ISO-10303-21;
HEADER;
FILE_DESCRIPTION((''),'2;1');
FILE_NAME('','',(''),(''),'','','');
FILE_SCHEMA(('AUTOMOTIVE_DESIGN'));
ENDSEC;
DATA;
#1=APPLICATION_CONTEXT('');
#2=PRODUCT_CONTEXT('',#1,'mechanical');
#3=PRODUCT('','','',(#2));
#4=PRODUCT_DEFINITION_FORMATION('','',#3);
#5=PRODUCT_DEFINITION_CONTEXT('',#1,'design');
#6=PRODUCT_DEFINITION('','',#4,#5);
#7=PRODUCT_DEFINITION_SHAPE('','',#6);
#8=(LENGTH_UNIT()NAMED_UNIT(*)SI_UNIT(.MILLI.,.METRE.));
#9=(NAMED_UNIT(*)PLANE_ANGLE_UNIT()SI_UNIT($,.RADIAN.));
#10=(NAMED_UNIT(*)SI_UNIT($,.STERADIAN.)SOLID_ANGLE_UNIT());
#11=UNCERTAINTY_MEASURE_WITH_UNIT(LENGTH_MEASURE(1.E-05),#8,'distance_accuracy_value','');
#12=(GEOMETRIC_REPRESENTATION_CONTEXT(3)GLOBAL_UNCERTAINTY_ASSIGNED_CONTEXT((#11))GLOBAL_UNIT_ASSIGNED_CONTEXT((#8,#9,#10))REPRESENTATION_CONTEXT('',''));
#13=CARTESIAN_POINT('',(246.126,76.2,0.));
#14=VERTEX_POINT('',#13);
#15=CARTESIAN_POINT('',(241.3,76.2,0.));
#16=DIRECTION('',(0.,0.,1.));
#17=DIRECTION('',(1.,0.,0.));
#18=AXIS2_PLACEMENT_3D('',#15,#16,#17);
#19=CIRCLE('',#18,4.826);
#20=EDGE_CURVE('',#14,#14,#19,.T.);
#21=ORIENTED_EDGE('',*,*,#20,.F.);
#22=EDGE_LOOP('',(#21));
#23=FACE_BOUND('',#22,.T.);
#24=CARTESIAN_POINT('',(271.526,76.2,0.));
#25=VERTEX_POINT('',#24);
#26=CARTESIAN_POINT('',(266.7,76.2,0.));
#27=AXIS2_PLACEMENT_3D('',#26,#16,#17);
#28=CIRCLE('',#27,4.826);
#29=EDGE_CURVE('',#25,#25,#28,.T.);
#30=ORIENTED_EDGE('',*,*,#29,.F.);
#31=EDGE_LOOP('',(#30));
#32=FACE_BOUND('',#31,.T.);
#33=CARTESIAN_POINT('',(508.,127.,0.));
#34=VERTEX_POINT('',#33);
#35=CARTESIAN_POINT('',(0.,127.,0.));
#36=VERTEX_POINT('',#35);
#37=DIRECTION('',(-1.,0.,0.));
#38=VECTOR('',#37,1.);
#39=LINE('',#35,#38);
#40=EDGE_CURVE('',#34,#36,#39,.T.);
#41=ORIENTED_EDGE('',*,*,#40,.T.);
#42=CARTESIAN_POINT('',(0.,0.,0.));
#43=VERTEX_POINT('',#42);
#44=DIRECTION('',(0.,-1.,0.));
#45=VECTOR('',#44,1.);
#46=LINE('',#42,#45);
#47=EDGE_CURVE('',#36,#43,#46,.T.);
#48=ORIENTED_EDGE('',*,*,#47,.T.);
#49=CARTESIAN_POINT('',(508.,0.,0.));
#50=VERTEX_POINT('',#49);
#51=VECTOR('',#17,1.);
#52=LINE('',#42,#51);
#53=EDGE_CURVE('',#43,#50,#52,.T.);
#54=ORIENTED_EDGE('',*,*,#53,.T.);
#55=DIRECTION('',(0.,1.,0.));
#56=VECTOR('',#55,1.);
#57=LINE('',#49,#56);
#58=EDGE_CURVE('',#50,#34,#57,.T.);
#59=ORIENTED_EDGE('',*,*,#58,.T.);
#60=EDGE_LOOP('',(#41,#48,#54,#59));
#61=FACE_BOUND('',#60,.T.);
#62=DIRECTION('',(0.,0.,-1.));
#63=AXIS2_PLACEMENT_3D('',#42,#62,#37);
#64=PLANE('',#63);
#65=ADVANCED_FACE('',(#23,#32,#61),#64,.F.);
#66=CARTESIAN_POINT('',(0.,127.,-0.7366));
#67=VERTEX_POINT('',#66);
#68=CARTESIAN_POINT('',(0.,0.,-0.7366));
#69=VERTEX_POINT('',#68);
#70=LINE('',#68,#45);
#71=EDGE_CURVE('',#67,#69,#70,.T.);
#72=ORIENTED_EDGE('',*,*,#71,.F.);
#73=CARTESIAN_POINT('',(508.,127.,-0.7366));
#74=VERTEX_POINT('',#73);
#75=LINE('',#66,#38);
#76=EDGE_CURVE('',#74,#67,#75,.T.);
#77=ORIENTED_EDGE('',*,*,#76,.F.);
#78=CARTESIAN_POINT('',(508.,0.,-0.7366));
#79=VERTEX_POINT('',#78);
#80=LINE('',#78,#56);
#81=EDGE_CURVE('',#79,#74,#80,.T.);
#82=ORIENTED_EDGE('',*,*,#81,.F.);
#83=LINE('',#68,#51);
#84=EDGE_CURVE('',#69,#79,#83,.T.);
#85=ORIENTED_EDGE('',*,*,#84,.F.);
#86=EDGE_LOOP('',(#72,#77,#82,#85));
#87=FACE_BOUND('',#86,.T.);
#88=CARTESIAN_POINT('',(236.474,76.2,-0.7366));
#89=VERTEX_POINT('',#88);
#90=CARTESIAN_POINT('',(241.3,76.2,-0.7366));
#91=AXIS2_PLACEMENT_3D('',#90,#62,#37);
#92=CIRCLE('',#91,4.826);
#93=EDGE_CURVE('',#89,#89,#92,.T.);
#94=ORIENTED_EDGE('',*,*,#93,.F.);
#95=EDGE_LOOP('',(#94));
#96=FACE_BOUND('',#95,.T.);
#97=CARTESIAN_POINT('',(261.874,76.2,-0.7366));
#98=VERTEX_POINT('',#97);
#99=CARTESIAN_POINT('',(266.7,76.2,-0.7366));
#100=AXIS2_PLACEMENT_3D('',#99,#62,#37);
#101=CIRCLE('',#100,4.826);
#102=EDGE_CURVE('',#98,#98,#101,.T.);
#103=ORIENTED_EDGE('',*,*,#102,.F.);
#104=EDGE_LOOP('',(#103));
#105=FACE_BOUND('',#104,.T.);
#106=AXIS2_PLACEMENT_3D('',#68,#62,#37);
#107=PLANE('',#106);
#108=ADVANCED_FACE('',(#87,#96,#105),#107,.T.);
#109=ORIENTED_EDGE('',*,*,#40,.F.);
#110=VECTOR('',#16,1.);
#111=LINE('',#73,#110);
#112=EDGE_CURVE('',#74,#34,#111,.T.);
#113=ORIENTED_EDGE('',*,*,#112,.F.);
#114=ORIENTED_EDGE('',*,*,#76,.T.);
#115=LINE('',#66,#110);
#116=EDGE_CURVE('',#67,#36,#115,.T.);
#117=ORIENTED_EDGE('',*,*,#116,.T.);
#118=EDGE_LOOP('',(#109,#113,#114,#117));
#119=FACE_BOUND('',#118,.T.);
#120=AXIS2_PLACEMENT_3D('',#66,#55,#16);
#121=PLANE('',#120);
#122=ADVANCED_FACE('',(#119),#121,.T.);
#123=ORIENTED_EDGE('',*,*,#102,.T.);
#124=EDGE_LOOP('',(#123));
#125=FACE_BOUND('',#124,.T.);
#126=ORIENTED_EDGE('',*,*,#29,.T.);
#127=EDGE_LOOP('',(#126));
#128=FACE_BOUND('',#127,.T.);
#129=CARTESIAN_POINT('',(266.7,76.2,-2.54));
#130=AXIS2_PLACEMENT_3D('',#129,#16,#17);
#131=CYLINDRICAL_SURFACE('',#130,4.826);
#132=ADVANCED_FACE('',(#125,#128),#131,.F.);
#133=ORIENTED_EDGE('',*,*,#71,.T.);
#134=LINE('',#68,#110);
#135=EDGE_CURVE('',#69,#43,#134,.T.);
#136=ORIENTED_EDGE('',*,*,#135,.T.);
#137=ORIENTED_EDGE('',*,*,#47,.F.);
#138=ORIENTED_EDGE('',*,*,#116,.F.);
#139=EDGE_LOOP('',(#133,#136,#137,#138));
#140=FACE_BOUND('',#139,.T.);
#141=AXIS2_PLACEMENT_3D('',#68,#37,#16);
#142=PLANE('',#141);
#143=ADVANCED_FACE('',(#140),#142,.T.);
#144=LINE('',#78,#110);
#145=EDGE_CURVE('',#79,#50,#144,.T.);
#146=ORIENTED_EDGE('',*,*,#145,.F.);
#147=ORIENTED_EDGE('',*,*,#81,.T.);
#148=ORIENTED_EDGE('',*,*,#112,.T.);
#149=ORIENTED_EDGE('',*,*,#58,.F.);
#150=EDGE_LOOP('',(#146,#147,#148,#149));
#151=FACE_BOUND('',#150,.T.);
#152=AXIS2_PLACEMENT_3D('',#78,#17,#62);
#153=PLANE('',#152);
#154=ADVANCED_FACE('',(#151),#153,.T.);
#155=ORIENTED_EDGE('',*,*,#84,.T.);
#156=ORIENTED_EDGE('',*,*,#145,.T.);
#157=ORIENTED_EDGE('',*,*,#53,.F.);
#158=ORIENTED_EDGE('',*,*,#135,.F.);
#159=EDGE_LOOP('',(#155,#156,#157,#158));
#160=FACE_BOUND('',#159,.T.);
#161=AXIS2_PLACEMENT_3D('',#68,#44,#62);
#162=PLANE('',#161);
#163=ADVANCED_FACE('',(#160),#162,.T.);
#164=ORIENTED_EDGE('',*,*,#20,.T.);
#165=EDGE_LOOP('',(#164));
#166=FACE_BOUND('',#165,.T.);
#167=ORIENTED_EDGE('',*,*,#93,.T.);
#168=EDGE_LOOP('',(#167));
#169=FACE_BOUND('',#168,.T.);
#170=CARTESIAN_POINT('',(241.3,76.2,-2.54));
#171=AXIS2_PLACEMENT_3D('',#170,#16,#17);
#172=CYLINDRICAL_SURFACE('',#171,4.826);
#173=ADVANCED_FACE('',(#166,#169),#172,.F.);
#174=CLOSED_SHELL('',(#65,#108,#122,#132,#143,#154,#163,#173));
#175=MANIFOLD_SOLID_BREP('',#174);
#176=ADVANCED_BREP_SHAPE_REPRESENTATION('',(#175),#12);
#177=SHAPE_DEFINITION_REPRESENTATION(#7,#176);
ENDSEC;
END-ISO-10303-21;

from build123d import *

# Parameters (mm, degrees)
SKETCH1_W          = 508
SKETCH1_H          = 127
BASE_FLANGE1_DEPTH = 0.7366
SKETCH2_R          = 4.826
CUT_EXTRUDE1_DEPTH = 2.54


# Sheet-metal steps are written as plain solids
with BuildPart() as part:
    # Sketch1 → Base-Flange1 (new body)
    with BuildSketch(Plane.XY):
        with Locations((254, 63.5)):
            Rectangle(SKETCH1_W, SKETCH1_H)
    extrude(amount=-BASE_FLANGE1_DEPTH)

    # Sketch2 → Cut-Extrude1 (cut)
    with BuildSketch(Plane.XY):
        with Locations((266.7, 76.2)):
            Circle(SKETCH2_R)
        with Locations((241.3, 76.2)):
            Circle(SKETCH2_R)
    extrude(amount=-CUT_EXTRUDE1_DEPTH, mode=Mode.SUBTRACT)


solid = part.part
